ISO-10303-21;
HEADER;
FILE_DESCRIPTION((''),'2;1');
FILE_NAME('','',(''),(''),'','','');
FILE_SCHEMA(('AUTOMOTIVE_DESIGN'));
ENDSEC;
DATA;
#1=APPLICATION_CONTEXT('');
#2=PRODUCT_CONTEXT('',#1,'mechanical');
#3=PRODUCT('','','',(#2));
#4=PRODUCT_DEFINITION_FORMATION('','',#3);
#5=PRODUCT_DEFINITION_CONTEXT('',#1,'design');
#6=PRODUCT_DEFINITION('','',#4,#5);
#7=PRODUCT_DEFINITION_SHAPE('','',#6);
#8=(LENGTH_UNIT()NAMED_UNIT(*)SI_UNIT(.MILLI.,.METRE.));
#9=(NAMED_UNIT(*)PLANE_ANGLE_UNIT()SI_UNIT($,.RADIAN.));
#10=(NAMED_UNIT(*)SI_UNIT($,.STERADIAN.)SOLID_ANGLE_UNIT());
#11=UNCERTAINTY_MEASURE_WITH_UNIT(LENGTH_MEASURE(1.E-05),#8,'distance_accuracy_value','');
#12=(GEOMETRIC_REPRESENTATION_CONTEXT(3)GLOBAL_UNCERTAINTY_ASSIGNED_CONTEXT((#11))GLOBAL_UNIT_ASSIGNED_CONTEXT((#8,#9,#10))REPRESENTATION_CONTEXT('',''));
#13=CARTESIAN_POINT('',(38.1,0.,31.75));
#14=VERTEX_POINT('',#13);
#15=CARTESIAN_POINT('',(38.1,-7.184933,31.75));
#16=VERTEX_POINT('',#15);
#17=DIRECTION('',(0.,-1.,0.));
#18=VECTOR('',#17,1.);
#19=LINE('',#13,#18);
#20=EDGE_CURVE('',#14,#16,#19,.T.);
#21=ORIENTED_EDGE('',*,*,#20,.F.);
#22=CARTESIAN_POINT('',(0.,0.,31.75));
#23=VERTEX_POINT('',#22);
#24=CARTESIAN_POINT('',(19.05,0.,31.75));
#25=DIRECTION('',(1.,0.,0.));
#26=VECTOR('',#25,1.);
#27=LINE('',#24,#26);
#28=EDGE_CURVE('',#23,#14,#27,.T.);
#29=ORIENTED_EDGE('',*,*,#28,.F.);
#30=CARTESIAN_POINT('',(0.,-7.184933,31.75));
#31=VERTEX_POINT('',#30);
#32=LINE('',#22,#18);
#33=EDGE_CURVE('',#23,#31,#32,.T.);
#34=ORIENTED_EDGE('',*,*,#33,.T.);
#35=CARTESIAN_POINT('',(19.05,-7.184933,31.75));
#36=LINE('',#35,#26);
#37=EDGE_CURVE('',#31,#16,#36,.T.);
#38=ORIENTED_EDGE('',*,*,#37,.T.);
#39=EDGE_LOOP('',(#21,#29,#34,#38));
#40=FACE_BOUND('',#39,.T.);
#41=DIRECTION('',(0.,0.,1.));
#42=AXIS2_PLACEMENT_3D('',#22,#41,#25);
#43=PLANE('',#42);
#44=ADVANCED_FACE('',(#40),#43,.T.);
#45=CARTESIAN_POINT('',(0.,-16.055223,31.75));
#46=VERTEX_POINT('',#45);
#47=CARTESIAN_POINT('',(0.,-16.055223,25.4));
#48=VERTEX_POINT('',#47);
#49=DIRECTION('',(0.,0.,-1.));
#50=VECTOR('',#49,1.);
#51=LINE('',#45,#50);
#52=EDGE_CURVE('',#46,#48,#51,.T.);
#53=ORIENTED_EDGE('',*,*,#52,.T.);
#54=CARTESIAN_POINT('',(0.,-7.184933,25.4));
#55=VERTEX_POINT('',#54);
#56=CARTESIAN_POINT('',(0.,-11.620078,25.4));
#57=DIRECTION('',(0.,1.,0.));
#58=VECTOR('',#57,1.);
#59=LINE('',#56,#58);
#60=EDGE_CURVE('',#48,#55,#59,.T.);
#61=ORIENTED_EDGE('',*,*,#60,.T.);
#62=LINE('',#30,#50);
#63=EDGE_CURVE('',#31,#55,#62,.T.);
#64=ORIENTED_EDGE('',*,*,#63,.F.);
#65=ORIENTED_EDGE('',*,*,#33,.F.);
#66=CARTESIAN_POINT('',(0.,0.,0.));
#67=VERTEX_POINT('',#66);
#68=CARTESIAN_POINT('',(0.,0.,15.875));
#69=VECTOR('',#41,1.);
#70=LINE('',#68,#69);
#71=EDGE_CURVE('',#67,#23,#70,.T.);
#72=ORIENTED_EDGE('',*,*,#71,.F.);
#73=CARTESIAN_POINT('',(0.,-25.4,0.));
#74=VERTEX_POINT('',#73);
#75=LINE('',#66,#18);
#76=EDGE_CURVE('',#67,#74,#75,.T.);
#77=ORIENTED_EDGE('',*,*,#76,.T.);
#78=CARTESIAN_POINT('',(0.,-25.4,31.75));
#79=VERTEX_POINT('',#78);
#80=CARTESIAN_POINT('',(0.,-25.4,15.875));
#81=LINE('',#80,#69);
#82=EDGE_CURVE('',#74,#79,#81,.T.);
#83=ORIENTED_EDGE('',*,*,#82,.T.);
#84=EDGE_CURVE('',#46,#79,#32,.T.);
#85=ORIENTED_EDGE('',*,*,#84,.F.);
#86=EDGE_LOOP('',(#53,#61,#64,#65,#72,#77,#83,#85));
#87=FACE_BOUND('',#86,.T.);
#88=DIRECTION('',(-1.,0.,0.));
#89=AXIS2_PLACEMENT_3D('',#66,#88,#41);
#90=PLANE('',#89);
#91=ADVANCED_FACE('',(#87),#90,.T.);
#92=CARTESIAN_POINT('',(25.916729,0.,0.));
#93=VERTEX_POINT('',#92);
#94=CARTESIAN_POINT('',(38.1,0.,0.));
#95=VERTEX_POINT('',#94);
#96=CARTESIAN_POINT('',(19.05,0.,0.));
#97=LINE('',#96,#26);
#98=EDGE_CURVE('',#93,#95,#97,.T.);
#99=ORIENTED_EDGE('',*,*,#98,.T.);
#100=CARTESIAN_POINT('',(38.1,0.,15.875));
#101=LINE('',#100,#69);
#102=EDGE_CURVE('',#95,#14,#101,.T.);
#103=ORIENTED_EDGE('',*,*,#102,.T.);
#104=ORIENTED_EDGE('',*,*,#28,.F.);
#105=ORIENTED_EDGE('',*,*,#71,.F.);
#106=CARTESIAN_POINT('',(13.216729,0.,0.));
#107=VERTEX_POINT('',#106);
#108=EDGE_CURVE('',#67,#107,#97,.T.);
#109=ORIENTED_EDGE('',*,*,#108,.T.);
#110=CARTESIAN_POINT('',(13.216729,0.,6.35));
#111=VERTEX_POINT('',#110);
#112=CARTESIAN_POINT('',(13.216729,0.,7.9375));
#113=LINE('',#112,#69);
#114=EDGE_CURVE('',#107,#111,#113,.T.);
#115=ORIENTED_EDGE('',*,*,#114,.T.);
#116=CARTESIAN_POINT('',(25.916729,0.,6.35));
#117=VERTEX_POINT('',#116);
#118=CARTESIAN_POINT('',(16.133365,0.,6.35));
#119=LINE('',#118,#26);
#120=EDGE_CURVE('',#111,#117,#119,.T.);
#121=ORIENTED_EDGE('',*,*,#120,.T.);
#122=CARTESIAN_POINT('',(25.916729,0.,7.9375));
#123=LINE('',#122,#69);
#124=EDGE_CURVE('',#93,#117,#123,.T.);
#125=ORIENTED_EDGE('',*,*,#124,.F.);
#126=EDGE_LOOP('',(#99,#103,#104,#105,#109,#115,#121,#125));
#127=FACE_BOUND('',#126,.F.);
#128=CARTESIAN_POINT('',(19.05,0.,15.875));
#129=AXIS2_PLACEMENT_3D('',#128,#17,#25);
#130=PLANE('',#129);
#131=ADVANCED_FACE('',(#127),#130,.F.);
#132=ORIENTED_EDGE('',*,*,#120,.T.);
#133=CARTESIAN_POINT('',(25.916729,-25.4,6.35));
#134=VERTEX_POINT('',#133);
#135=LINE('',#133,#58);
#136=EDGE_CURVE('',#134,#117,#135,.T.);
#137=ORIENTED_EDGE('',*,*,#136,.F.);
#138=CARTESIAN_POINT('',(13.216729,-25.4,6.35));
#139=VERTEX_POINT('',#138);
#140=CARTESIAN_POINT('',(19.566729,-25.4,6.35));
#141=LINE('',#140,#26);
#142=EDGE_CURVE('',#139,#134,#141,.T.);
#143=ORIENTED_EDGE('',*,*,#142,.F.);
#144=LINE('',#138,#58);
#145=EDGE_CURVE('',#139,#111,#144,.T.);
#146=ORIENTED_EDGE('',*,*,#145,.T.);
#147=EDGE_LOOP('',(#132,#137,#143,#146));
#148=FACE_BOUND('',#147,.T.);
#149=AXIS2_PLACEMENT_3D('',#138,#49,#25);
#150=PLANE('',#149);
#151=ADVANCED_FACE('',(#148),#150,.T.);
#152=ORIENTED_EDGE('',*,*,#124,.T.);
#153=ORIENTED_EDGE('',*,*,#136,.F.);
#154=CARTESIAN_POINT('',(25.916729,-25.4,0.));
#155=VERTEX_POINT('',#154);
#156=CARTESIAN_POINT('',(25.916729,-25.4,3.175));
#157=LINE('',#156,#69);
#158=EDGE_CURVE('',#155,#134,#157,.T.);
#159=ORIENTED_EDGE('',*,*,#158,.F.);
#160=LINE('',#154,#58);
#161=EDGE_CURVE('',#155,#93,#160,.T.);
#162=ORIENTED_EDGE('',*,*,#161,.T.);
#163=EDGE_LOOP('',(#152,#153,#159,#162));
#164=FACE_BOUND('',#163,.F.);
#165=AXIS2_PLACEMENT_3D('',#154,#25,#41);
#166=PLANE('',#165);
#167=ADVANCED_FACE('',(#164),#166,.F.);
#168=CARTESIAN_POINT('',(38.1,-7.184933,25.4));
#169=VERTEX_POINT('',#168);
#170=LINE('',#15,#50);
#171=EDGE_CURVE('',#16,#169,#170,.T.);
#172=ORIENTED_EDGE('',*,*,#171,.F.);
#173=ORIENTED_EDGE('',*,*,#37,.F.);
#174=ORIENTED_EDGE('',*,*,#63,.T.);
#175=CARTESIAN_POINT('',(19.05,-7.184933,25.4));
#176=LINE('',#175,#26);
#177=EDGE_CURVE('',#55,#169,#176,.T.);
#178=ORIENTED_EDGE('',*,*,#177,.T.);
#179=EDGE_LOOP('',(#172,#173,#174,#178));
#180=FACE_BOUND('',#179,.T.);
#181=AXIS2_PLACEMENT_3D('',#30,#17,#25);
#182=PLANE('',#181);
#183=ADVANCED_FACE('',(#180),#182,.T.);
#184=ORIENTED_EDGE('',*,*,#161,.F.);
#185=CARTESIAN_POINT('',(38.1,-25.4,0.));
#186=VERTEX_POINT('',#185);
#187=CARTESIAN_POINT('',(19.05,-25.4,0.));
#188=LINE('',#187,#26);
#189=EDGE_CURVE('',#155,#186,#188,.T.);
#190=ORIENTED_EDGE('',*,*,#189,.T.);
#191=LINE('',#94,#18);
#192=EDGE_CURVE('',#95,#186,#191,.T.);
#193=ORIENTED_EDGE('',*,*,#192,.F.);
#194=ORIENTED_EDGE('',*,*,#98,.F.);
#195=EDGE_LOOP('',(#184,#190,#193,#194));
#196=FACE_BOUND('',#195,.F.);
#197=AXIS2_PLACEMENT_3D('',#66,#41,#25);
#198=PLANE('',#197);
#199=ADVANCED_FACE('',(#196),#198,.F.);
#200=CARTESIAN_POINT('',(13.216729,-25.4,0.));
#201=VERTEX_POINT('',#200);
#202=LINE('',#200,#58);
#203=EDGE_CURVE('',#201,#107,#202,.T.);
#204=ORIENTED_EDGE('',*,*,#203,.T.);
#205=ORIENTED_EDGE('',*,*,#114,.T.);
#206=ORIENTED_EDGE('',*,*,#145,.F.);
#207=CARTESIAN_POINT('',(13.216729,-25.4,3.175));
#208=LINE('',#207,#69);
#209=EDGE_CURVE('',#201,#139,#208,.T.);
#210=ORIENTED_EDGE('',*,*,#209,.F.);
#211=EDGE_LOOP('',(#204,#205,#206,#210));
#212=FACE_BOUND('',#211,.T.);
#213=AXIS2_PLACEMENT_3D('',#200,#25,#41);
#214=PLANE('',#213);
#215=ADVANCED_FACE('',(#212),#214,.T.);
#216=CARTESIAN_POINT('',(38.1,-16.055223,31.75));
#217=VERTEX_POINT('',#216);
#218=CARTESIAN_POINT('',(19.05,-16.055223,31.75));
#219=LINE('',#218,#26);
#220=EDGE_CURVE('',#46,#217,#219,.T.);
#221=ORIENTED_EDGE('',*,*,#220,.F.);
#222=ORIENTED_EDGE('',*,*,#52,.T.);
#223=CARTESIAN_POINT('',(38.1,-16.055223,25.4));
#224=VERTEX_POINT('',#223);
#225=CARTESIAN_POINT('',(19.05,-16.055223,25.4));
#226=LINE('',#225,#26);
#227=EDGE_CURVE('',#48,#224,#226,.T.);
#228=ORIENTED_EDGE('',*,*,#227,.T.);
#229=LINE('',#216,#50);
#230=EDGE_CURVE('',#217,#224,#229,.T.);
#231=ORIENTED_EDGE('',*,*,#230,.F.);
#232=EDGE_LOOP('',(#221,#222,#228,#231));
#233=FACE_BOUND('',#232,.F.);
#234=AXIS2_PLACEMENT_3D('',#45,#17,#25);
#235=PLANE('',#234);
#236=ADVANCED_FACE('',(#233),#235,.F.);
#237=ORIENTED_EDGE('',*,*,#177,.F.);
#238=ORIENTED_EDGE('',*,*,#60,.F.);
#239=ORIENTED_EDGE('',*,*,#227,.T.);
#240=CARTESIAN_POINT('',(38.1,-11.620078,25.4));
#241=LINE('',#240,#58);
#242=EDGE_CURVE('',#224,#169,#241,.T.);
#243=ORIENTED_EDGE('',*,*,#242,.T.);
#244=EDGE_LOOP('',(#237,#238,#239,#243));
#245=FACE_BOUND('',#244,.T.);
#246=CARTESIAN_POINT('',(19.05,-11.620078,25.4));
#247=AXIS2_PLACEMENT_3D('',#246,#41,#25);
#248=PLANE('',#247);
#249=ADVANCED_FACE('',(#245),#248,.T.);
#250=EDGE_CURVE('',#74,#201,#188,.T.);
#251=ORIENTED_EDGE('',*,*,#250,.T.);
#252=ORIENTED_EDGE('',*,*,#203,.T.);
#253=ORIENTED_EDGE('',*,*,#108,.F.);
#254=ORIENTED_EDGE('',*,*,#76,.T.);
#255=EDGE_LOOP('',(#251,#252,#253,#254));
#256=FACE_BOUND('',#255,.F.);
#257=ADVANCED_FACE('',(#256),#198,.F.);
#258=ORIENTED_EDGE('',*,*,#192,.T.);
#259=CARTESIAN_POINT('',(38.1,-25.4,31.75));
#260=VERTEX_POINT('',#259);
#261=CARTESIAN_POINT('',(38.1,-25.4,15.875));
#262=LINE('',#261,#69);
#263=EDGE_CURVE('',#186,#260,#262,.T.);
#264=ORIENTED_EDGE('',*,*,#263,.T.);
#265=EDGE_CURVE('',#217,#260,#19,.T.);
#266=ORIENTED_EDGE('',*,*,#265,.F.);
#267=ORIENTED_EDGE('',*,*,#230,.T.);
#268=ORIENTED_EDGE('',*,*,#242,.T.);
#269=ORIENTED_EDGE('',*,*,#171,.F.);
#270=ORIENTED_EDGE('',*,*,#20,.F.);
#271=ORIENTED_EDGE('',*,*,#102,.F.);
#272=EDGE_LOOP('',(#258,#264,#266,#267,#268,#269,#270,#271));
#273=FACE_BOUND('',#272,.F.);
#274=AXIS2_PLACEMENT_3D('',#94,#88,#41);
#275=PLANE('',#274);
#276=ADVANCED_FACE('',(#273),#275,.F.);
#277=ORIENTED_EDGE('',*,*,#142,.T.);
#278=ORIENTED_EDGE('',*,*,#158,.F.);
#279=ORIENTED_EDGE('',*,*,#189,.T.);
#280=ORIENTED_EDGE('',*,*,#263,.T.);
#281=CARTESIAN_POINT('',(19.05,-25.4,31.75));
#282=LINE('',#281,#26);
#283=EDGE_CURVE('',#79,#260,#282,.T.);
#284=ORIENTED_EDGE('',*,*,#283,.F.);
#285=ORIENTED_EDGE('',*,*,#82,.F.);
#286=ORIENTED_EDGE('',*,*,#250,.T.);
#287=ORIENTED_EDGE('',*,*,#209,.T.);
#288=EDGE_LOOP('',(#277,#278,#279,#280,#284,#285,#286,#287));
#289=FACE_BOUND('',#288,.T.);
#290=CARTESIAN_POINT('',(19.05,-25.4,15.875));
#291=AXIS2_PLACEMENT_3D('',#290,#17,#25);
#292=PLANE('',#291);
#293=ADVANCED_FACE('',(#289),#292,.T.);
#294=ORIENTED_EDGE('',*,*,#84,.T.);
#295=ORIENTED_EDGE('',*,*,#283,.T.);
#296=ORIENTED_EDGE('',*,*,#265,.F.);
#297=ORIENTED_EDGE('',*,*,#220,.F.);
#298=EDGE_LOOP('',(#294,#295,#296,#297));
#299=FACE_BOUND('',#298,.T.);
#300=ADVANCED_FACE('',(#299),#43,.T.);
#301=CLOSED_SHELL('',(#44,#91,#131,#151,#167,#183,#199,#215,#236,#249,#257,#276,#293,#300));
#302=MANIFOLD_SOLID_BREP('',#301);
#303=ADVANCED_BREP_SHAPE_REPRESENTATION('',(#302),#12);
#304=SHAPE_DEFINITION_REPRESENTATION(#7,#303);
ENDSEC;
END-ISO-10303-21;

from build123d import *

# Parameters (mm, degrees)
F0_W     = 38.1
F0_H     = 31.75
F1_DEPTH = 25.4
F2_W     = 12.7
F2_H     = 6.35
F3_DEPTH = 25.401
F4_W     = 38.1
F4_H     = 8.8702891953
F5_DEPTH = 6.35


# Not quite as in the source:
# - a length typed as a fraction of an inch, garbled in the dataset ("3 / 203.2 mm" for 3/8 in), is restored


with BuildPart() as f1:
    # F0 (on Front) → F1 (new body)
    with BuildSketch(Plane.XZ):
        with Locations((19.05, 15.875)):
            Rectangle(F0_W, F0_H)
    extrude(amount=F1_DEPTH)

    # F2 (on face) → F3 (cut, through all)
    with BuildSketch(Plane.XZ.offset(25.4)):
        with Locations((19.5667292759, 3.175)):
            Rectangle(F2_W, F2_H)
    extrude(amount=-F3_DEPTH, mode=Mode.SUBTRACT)

    # F4 (on face) → F5 (cut)
    with BuildSketch(Plane.XY.offset(31.75)):
        with Locations((19.05, -11.620078003)):
            Rectangle(F4_W, F4_H)
    extrude(amount=-F5_DEPTH, mode=Mode.SUBTRACT)


solid = f1.part
